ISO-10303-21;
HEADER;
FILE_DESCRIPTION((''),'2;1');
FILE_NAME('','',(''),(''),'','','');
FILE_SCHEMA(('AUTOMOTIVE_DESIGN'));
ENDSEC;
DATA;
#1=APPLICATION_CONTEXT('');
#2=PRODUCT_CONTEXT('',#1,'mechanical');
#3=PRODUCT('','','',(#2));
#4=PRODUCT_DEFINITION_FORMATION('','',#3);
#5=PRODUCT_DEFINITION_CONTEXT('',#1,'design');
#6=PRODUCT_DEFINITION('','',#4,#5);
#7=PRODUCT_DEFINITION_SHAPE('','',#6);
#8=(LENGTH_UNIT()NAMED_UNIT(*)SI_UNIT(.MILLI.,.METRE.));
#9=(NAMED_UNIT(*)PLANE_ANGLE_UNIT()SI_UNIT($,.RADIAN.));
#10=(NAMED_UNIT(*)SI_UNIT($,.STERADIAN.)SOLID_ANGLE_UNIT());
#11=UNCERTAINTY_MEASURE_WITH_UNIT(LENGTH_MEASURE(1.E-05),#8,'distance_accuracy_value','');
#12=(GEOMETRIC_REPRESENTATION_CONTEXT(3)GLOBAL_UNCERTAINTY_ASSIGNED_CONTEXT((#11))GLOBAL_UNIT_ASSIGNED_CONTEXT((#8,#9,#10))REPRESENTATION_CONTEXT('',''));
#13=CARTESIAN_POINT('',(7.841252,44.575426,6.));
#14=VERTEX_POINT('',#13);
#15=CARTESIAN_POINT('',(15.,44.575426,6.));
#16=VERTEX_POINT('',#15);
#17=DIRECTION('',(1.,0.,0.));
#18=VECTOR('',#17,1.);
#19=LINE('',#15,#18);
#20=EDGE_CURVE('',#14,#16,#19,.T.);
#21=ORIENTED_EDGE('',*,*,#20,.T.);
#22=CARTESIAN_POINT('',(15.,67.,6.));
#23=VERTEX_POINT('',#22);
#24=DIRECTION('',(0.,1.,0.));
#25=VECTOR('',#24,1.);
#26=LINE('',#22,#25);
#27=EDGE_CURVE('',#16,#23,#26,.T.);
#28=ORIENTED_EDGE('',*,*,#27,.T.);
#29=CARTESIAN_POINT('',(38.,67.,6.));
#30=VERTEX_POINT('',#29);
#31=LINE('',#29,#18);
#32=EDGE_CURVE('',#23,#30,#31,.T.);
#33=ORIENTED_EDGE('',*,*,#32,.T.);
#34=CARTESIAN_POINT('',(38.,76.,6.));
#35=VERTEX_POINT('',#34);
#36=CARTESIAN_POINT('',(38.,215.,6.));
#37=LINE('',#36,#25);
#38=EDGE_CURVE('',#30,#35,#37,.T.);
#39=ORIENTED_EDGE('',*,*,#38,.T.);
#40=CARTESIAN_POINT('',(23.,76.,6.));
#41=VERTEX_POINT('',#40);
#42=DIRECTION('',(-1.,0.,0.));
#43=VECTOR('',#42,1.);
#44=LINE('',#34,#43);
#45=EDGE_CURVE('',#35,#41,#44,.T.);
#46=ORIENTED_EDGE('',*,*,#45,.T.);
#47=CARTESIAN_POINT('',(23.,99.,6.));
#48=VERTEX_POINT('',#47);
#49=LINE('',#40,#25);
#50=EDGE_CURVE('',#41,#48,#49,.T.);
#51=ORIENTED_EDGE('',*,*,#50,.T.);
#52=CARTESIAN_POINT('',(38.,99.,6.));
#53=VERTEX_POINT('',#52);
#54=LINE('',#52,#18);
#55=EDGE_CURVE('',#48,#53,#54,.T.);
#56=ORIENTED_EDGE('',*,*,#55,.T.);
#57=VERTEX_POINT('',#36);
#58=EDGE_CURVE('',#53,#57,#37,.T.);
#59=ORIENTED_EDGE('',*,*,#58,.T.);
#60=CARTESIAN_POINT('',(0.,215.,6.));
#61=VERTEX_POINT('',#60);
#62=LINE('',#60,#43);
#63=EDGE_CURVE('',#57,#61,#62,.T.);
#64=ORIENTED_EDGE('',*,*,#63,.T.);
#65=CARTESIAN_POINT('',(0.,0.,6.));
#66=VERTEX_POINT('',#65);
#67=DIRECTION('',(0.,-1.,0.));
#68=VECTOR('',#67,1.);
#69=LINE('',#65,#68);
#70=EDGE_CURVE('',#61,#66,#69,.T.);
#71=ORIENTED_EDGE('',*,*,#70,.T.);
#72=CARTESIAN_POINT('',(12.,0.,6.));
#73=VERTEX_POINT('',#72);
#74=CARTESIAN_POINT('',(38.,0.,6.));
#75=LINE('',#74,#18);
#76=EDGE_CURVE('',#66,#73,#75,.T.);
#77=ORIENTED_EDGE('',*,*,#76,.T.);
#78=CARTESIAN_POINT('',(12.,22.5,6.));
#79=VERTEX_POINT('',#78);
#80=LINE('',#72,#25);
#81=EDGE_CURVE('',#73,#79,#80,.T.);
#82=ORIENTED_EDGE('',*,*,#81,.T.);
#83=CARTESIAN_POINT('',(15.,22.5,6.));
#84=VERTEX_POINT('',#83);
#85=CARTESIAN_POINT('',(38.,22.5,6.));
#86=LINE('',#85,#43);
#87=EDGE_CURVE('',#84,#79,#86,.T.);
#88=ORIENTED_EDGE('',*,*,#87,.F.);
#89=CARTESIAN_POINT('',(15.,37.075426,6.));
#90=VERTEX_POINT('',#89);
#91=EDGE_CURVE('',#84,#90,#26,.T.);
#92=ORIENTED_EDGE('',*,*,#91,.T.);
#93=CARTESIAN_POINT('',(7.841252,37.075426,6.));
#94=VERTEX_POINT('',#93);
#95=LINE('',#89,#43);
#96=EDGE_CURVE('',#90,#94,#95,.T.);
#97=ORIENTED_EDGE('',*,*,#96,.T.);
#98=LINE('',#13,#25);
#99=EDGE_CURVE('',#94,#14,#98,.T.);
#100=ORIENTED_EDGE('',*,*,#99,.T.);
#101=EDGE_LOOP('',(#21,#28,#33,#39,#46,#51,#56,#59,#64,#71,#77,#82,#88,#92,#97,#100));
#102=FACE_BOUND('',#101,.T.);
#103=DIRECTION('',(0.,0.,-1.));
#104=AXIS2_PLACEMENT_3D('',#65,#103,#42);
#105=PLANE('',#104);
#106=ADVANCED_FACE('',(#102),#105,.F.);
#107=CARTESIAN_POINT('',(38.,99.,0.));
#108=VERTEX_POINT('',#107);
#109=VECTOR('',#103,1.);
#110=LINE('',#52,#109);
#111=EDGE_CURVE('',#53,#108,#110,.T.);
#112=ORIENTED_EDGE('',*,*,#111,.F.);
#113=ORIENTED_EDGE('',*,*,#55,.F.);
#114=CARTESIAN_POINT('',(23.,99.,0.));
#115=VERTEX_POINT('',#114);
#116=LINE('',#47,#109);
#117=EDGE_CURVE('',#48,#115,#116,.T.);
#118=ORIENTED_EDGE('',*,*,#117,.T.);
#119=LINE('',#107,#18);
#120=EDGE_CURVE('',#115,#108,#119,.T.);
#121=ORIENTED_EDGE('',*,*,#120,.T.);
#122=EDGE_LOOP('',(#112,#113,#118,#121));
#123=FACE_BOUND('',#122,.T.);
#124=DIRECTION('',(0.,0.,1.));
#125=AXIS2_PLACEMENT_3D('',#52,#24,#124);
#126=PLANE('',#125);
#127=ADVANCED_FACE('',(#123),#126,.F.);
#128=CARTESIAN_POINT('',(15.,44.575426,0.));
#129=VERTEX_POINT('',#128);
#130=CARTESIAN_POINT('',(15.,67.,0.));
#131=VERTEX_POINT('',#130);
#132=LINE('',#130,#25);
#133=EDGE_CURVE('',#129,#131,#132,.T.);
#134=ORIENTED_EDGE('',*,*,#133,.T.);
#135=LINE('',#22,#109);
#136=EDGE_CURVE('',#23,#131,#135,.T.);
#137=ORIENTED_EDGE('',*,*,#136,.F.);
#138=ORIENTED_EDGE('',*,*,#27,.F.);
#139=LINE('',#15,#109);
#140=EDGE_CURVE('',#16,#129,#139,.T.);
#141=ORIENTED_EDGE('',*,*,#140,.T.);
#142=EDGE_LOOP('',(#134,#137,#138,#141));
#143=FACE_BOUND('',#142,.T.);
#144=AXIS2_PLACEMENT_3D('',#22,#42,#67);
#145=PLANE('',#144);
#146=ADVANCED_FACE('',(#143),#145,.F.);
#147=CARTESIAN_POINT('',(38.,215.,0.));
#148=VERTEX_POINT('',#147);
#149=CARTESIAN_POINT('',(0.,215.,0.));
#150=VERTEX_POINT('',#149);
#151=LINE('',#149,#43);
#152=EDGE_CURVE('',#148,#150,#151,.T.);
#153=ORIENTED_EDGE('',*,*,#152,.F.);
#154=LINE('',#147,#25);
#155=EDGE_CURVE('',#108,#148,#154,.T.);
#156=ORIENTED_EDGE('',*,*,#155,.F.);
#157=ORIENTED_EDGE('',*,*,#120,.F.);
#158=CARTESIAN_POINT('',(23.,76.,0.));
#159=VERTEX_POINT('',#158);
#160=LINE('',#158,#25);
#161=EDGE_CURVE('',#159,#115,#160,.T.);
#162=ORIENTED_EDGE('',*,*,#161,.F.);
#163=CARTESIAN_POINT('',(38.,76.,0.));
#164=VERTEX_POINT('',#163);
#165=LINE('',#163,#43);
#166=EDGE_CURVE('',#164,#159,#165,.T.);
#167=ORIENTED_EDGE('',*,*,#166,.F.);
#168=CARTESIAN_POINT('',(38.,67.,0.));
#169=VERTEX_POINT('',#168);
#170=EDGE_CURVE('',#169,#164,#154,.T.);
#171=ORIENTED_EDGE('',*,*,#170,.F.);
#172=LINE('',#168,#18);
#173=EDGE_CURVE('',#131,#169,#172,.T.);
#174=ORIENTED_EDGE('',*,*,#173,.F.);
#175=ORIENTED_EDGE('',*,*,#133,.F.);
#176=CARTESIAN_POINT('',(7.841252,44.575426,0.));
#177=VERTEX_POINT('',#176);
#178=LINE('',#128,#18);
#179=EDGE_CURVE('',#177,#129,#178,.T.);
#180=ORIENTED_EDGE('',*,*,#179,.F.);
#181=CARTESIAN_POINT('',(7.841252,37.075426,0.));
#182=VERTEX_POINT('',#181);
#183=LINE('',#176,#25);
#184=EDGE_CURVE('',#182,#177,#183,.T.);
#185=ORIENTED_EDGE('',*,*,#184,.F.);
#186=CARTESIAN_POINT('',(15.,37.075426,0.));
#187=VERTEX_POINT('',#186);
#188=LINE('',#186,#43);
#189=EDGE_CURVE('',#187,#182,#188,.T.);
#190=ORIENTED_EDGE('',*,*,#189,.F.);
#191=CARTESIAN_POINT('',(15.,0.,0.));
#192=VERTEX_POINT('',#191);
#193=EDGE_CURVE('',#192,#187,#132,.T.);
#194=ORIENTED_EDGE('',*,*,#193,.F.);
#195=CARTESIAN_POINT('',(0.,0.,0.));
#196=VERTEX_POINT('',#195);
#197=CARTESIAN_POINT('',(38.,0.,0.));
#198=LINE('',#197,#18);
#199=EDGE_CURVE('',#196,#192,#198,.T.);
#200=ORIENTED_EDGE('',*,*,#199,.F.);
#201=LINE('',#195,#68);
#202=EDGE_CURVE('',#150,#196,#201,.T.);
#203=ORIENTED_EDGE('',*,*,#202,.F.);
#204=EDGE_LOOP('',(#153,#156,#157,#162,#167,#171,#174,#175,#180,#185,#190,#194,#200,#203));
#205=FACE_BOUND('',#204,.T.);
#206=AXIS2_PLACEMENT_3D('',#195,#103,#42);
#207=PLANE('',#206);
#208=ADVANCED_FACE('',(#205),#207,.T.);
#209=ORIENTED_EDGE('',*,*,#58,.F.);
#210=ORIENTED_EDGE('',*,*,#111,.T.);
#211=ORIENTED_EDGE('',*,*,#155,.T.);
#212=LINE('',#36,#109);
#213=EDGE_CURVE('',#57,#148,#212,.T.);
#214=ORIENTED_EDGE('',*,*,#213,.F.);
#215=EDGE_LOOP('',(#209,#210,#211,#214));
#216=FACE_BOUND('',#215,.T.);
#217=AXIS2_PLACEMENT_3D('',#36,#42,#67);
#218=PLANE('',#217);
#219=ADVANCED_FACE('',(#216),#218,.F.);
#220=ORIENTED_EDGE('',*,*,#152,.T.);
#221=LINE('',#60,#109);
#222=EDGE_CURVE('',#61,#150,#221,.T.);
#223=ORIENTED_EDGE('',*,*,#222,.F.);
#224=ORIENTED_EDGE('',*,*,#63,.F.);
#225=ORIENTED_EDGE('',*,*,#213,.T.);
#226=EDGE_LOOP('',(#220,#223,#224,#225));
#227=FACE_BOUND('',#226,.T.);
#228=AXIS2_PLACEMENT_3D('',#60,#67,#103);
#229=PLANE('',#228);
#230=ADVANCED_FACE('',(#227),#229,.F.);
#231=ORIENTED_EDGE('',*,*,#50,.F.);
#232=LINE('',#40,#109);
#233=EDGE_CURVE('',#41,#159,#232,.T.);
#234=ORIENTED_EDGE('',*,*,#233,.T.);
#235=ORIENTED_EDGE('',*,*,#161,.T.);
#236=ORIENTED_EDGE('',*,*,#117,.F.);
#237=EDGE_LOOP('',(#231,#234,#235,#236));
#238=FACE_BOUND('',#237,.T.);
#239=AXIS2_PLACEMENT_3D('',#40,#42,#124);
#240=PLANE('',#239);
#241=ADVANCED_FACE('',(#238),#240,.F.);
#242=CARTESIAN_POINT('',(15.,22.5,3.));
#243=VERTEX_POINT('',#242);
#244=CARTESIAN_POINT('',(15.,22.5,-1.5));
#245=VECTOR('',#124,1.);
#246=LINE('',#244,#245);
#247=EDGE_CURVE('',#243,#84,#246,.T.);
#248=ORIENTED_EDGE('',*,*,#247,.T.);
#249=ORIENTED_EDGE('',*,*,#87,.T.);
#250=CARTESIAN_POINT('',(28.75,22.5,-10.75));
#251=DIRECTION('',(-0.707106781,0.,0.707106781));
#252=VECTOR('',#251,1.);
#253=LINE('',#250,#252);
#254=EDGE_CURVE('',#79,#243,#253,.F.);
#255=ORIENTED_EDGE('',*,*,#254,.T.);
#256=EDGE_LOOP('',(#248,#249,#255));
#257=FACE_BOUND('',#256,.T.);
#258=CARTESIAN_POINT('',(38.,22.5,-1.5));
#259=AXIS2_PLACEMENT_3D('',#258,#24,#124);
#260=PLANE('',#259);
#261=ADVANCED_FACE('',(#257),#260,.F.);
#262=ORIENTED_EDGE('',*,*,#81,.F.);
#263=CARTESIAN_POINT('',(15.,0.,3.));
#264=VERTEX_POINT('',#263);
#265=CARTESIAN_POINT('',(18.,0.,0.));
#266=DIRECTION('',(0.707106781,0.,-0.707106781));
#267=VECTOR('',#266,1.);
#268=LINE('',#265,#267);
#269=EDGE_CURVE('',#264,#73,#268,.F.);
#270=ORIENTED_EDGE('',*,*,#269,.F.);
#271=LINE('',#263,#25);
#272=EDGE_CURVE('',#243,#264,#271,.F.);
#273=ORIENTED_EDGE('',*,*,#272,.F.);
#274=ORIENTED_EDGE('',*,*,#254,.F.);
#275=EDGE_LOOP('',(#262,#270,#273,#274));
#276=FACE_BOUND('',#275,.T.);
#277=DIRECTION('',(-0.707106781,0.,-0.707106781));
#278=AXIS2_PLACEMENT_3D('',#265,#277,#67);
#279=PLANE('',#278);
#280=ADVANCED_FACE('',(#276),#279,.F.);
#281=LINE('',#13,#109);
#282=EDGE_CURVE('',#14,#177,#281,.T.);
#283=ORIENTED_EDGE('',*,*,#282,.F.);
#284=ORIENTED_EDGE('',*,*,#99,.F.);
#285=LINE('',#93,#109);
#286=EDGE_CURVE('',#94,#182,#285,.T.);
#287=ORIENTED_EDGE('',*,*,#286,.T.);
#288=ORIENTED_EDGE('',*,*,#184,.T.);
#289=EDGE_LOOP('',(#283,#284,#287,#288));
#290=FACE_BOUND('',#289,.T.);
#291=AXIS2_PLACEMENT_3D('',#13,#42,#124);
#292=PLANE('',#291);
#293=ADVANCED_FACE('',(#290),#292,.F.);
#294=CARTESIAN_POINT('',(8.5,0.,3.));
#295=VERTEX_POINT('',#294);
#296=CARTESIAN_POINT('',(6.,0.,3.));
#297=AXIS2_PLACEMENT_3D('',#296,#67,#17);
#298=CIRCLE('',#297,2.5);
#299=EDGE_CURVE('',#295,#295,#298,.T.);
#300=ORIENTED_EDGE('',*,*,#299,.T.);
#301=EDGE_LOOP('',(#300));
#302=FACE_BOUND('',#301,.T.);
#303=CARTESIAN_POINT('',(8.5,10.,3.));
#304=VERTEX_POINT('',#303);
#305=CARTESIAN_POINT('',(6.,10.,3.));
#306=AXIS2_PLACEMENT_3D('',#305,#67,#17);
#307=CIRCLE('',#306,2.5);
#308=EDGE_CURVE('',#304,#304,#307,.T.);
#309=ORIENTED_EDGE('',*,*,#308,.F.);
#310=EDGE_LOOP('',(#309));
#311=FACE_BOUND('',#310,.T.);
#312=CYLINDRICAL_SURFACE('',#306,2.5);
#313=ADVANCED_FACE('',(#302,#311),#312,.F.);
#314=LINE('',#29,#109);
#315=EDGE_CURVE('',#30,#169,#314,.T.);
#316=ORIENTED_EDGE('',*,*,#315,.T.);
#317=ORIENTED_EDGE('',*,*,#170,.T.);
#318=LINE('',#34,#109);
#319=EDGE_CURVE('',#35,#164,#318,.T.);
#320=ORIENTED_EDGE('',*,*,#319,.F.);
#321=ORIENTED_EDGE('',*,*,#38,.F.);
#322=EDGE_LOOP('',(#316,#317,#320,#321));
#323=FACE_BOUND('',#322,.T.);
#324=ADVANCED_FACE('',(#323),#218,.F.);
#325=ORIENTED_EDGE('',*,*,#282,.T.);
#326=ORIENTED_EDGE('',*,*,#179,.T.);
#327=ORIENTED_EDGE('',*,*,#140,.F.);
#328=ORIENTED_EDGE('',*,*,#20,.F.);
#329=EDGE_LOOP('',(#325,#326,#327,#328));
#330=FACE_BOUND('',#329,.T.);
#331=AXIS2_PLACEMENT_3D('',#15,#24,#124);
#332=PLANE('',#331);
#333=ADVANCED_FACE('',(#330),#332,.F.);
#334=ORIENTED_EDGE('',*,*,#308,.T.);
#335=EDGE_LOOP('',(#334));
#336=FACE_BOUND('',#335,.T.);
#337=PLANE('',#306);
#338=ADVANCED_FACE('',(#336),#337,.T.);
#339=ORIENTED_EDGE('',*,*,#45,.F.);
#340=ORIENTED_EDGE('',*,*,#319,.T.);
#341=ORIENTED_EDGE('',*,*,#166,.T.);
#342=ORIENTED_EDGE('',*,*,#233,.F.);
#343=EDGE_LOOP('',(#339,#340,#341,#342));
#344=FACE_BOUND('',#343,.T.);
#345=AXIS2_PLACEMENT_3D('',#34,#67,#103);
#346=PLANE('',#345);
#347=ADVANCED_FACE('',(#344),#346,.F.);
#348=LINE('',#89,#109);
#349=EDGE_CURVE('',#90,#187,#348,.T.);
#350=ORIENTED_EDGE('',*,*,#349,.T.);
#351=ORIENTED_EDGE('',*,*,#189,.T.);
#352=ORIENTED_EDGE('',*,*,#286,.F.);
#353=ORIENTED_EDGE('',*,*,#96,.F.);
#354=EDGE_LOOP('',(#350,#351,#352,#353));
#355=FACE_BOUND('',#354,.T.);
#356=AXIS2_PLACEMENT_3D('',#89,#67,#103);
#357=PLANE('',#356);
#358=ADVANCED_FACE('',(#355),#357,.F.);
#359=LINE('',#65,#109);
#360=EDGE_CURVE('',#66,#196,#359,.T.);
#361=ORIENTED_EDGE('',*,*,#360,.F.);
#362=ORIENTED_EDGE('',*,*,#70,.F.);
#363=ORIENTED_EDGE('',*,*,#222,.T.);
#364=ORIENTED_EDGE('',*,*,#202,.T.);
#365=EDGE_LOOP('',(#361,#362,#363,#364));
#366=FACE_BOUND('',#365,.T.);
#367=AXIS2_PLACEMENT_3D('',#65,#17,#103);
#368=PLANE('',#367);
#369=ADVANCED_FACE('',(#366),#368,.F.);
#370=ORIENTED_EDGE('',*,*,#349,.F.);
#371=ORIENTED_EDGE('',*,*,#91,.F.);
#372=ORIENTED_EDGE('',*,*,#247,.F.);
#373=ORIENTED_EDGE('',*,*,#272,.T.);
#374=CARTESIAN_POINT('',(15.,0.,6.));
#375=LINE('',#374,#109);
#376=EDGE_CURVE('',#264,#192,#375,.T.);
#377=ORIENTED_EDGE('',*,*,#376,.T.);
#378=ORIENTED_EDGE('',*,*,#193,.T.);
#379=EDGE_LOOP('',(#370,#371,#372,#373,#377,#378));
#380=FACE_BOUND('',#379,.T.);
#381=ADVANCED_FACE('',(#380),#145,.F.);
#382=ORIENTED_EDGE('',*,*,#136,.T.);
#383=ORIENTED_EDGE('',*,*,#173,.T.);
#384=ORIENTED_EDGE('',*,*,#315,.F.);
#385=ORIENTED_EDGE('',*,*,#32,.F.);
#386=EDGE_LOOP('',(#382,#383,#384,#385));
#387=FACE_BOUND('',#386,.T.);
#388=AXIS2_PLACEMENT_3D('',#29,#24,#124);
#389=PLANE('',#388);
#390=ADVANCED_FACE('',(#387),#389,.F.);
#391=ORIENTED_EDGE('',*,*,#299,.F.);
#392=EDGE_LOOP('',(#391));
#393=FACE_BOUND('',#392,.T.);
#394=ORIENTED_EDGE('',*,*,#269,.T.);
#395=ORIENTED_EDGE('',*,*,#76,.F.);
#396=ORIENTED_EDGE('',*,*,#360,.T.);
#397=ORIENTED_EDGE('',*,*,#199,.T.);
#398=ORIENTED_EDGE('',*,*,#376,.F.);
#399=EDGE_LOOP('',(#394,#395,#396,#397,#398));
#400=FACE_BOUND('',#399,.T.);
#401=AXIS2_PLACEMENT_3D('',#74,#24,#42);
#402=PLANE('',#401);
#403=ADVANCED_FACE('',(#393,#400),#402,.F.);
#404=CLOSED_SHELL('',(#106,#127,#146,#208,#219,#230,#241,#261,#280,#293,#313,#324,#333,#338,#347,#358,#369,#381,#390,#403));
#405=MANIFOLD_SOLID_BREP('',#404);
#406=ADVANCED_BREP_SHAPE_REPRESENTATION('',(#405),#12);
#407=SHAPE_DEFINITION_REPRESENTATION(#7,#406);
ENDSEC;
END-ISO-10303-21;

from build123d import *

# Parameters (mm, degrees)
ESQUISSE1_W             = 38
ESQUISSE1_H             = 215
BOSS_EXTRU_1_DEPTH      = 6
ESQUISSE2_W             = 15
ESQUISSE2_H             = 23
ENL_V_MAT_EXTRU_1_DEPTH = 219.414743092
ESQUISSE3_W             = 20
ESQUISSE3_H             = 22.5
ENL_V_MAT_EXTRU_2_DEPTH = 7.5
CHANFREIN1_SIZE         = 6
ESQUISSE4_W             = 23
ESQUISSE4_H             = 67
ENL_V_MAT_EXTRU_3_DEPTH = 219.414743092
ESQUISSE5_W             = 7.158748458
ESQUISSE5_H             = 7.5
ENL_V_MAT_EXTRU_4_DEPTH = 219.414743092
ESQUISSE6_R             = 2.5
ENL_V_MAT_EXTRU_5_DEPTH = 10


with BuildPart() as part:
    # Esquisse1 → Boss.-Extru.1 (new body)
    with BuildSketch(Plane.XY):
        with Locations((19, 107.5)):
            Rectangle(ESQUISSE1_W, ESQUISSE1_H)
    extrude(amount=BOSS_EXTRU_1_DEPTH)

    # Esquisse2 → Enlèv. mat.-Extru.1 (cut, through all)
    with BuildSketch(Plane(origin=(0, 0, 0), x_dir=(-1, 0, 0), z_dir=(0, 0, -1))):
        with Locations((-30.5, 87.5)):
            Rectangle(ESQUISSE2_W, ESQUISSE2_H)
    extrude(amount=-ENL_V_MAT_EXTRU_1_DEPTH, mode=Mode.SUBTRACT)

    # Esquisse3 → Enlèv. mat.-Extru.2 (cut)
    with BuildSketch(Plane.XY.offset(6)):
        with Locations((28, 11.25)):
            Rectangle(ESQUISSE3_W, ESQUISSE3_H)
    extrude(amount=-ENL_V_MAT_EXTRU_2_DEPTH, mode=Mode.SUBTRACT)

    # Chanfrein1
    chanfrein1_edges = [part.edges().sort_by_distance(p)[0] for p in [
        (18, 11.25, 6),
    ]]
    chamfer(chanfrein1_edges, length=CHANFREIN1_SIZE - 0.0001)  # a hair under: the kernel refuses the full size

    # Esquisse4 → Enlèv. mat.-Extru.3 (cut, through all)
    with BuildSketch(Plane(origin=(0, 0, 0), x_dir=(-1, 0, 0), z_dir=(0, 0, -1))):
        with Locations((-26.5, 33.5)):
            Rectangle(ESQUISSE4_W, ESQUISSE4_H)
    extrude(amount=-ENL_V_MAT_EXTRU_3_DEPTH, mode=Mode.SUBTRACT)

    # Esquisse5 → Enlèv. mat.-Extru.4 (cut, through all)
    with BuildSketch(Plane(origin=(0, 0, 0), x_dir=(-1, 0, 0), z_dir=(0, 0, -1))):
        with Locations((-11.420625771, 40.825425785)):
            Rectangle(ESQUISSE5_W, ESQUISSE5_H)
    extrude(amount=-ENL_V_MAT_EXTRU_4_DEPTH, mode=Mode.SUBTRACT)

    # Esquisse6 → Enlèv. mat.-Extru.5 (cut)
    with BuildSketch(Plane(origin=(0, 0, 0), x_dir=(-1, 0, 0), z_dir=(0, -1, 0))):
        with Locations(Location((-6, -3, 0), (0, 0, 180))):
            Circle(ESQUISSE6_R)
    extrude(amount=-ENL_V_MAT_EXTRU_5_DEPTH, mode=Mode.SUBTRACT)


solid = part.part
